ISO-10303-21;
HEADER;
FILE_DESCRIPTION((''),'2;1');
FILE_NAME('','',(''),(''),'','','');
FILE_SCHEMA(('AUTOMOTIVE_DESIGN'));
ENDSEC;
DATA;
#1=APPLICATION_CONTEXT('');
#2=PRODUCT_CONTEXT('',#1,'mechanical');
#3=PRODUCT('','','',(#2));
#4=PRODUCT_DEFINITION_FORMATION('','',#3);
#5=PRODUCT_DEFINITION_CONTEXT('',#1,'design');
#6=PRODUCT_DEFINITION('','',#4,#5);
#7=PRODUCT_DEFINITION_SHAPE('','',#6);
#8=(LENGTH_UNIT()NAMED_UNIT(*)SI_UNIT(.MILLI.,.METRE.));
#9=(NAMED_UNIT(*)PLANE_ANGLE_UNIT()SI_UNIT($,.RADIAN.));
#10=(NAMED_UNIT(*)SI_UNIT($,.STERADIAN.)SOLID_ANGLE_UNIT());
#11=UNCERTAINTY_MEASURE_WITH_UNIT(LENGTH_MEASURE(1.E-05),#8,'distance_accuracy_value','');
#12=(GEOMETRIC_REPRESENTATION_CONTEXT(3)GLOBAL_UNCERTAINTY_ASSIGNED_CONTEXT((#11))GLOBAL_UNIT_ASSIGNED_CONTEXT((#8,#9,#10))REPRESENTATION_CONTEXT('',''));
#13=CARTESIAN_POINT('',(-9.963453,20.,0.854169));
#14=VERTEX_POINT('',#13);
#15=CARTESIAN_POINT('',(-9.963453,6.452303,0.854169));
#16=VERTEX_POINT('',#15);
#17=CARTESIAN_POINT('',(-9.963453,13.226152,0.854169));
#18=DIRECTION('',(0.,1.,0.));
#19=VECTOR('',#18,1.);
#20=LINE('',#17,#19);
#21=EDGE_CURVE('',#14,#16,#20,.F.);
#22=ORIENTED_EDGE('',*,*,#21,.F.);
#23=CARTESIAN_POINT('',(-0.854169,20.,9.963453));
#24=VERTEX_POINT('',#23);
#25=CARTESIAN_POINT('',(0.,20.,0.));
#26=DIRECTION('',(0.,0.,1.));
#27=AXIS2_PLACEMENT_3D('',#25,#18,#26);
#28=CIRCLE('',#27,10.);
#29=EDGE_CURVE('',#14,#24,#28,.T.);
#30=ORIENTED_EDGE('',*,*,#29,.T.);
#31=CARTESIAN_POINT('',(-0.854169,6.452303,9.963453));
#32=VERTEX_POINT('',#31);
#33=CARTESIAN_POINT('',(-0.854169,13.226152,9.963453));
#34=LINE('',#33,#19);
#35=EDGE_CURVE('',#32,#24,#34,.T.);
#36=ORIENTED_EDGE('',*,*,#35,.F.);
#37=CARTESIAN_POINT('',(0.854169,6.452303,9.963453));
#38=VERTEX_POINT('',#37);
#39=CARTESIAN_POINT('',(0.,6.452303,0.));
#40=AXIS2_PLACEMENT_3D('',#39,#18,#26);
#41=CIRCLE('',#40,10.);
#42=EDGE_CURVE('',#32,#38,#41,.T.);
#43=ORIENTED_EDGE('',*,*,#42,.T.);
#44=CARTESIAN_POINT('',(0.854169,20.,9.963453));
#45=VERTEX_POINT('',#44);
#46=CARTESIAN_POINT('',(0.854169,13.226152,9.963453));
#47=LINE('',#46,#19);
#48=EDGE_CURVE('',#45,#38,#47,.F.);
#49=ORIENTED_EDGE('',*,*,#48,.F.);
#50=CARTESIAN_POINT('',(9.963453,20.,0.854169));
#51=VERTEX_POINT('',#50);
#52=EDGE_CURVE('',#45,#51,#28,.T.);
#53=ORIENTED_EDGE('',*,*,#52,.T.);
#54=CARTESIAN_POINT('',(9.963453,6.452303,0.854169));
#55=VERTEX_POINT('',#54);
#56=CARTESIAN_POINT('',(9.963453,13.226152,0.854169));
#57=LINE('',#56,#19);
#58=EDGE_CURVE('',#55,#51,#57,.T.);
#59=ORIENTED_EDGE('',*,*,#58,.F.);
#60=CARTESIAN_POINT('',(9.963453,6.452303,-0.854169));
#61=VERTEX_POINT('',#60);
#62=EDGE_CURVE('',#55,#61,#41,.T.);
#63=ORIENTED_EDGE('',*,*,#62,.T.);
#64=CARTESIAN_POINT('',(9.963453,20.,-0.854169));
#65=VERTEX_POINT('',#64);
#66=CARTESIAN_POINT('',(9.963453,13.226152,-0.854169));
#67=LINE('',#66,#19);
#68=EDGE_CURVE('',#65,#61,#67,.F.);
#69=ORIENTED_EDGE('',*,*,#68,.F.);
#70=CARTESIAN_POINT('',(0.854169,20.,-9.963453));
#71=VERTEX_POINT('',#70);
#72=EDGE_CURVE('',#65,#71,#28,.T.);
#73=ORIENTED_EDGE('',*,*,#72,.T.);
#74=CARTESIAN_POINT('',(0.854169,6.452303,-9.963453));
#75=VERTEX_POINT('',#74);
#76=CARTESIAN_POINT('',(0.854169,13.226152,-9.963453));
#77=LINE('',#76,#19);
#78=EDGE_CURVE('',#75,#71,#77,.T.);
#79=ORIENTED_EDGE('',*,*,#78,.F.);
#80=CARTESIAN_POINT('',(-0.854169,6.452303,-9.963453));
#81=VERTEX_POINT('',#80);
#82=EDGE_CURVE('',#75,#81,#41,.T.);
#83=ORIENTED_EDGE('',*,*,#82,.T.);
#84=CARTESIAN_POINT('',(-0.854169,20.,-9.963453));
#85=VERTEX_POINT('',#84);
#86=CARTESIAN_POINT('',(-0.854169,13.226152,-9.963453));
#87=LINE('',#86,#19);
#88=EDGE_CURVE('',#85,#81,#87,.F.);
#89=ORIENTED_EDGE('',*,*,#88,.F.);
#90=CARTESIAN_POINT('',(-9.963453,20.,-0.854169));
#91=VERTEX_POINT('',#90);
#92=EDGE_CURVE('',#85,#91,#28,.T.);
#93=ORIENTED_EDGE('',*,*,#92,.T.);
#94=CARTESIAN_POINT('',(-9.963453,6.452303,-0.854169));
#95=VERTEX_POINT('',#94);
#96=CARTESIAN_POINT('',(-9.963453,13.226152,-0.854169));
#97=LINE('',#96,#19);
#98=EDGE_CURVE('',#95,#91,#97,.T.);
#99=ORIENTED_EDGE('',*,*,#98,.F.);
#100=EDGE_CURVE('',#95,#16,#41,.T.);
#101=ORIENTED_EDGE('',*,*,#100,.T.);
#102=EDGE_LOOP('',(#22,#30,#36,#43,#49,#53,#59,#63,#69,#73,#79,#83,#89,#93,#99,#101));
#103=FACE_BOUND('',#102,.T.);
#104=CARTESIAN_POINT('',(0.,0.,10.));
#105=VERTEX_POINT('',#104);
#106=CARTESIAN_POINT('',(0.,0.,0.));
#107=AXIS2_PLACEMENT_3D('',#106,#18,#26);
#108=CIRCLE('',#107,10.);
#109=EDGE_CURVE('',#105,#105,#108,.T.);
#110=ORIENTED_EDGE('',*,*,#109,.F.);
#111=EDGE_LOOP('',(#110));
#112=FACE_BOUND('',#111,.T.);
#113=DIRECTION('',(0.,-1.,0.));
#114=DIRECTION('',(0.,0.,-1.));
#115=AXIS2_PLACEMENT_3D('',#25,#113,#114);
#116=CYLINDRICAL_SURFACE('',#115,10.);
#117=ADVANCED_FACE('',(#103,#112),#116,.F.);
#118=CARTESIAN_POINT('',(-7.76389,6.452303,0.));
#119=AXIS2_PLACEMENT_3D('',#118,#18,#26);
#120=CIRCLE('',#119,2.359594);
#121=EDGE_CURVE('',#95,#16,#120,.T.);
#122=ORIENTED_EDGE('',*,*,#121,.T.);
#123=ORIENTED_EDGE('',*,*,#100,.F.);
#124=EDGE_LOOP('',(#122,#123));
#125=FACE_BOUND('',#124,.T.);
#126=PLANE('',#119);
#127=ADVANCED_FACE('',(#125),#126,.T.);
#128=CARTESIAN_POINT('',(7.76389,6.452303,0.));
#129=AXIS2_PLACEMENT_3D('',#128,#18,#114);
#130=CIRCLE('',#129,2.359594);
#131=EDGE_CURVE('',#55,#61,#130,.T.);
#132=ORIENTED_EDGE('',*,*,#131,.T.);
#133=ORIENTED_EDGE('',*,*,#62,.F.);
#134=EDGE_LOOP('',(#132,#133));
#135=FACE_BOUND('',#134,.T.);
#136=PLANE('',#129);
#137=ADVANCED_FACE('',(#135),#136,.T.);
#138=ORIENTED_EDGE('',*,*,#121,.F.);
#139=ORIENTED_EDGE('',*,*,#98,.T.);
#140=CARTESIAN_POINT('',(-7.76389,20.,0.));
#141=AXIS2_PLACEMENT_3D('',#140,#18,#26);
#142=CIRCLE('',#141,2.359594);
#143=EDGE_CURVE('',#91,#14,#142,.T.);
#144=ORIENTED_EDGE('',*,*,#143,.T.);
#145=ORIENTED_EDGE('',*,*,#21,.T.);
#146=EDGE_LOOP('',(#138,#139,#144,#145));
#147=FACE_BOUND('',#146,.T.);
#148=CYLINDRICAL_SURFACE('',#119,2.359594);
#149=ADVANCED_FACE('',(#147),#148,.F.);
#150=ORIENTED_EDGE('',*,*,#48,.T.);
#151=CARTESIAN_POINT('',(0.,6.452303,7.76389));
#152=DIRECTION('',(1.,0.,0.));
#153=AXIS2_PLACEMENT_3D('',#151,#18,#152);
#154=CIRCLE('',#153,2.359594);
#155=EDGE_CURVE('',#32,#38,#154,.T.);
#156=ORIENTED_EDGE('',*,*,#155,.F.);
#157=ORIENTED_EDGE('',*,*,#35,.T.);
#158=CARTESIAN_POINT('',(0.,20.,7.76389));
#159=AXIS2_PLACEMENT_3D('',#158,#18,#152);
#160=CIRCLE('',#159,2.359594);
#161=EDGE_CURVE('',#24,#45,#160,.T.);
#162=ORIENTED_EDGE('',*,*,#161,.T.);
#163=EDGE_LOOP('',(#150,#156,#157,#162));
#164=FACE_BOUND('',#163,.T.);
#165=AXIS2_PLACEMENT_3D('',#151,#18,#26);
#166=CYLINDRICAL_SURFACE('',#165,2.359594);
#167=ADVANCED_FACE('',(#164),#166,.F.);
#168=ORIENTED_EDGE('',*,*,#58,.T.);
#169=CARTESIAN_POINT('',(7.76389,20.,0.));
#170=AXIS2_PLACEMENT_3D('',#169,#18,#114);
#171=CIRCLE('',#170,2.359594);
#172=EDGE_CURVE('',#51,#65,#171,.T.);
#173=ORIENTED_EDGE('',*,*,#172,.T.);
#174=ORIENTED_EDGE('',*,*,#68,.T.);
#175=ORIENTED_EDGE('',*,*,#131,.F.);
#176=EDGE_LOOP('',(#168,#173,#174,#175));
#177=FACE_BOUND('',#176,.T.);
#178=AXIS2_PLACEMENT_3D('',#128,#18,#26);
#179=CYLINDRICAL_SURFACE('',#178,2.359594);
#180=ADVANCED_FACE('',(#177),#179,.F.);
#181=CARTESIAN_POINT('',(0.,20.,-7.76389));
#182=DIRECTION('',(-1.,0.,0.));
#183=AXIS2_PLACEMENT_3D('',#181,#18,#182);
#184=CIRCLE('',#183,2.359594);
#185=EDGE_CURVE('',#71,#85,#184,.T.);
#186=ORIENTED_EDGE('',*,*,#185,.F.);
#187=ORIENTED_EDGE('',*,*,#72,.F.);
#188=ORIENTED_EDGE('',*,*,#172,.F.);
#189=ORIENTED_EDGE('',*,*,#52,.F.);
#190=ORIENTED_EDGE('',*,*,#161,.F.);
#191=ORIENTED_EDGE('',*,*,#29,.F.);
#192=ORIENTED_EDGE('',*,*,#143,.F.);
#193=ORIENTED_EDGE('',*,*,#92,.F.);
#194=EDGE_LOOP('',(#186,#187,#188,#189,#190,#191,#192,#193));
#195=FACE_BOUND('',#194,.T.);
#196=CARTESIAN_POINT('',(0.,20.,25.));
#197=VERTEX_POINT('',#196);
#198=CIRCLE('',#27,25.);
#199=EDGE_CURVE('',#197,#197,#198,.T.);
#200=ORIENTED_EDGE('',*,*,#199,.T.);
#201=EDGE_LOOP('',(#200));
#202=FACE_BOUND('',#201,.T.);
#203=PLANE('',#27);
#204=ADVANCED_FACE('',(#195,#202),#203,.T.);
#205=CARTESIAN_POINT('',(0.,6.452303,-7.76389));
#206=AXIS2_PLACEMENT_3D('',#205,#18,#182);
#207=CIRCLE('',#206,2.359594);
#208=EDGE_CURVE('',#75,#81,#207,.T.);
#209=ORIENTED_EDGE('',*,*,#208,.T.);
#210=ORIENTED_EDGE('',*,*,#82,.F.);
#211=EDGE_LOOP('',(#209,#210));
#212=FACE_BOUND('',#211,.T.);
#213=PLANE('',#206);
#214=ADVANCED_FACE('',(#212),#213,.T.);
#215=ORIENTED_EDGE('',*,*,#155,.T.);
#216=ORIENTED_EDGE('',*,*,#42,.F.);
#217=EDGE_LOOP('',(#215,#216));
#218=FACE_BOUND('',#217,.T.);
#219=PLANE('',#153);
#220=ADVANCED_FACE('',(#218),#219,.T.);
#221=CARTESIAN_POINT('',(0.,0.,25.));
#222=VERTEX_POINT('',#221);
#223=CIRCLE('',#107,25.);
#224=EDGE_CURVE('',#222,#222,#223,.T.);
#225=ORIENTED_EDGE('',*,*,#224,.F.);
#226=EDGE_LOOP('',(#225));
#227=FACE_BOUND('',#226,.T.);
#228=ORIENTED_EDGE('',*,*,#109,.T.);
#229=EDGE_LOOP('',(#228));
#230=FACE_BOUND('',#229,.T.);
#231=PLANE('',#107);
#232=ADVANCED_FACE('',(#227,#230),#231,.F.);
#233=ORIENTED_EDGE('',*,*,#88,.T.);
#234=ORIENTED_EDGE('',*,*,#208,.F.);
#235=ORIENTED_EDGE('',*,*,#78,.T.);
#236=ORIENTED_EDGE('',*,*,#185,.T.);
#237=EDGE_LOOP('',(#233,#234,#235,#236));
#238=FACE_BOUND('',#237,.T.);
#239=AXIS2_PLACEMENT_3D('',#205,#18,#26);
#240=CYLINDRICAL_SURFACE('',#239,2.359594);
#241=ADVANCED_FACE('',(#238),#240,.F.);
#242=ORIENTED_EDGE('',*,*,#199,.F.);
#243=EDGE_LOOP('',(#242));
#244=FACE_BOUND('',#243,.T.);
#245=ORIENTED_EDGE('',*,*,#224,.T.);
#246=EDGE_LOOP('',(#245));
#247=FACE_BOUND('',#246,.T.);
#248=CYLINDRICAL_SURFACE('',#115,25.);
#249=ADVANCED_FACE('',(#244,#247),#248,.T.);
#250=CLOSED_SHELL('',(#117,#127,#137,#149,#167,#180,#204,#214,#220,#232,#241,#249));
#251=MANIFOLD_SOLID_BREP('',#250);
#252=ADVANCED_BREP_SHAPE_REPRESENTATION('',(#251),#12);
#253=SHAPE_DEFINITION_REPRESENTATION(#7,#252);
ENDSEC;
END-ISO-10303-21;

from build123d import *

# Parameters (mm, degrees)
SKETCH1_R           = 25
BOSS_EXTRUDE1_DEPTH = 20
SKETCH2_R           = 10
CUT_EXTRUDE1_DEPTH  = 41.620192023
SKETCH3_R           = 2.359593584
CUT_EXTRUDE2_DEPTH  = 13.547696906
CIRPATTERN1_COUNT   = 4


with BuildPart() as part:
    # Sketch1 → Boss-Extrude1 (new body)
    with BuildSketch(Plane(origin=(0, 0, 0), x_dir=(1, 0, 0), z_dir=(0, 1, 0))):
        Circle(SKETCH1_R)
    extrude(amount=BOSS_EXTRUDE1_DEPTH)

    # Sketch2 → Cut-Extrude1 (cut, through all)
    with BuildSketch(Plane(origin=(0, 0, 0), x_dir=(1, 0, 0), z_dir=(0, 1, 0))):
        Circle(SKETCH2_R)
    extrude(amount=CUT_EXTRUDE1_DEPTH, mode=Mode.SUBTRACT)

    # Sketch3 → Cut-Extrude2 (cut)
    with BuildSketch(Plane(origin=(0, 20, 0), x_dir=(1, 0, 0), z_dir=(0, 1, 0))):
        with Locations((-7.763889909, 0)):
            Circle(SKETCH3_R)
    cut_extrude2 = extrude(amount=-CUT_EXTRUDE2_DEPTH, mode=Mode.SUBTRACT)

    # CirPattern1: Cut-Extrude2 ×4 about axis
    cirpattern1_axis = Axis((0, 0, 0), (0, 1, 0))
    for i in range(1, CIRPATTERN1_COUNT):
        add(cut_extrude2.rotate(cirpattern1_axis, i * 360 / CIRPATTERN1_COUNT), mode=Mode.SUBTRACT)


solid = part.part
